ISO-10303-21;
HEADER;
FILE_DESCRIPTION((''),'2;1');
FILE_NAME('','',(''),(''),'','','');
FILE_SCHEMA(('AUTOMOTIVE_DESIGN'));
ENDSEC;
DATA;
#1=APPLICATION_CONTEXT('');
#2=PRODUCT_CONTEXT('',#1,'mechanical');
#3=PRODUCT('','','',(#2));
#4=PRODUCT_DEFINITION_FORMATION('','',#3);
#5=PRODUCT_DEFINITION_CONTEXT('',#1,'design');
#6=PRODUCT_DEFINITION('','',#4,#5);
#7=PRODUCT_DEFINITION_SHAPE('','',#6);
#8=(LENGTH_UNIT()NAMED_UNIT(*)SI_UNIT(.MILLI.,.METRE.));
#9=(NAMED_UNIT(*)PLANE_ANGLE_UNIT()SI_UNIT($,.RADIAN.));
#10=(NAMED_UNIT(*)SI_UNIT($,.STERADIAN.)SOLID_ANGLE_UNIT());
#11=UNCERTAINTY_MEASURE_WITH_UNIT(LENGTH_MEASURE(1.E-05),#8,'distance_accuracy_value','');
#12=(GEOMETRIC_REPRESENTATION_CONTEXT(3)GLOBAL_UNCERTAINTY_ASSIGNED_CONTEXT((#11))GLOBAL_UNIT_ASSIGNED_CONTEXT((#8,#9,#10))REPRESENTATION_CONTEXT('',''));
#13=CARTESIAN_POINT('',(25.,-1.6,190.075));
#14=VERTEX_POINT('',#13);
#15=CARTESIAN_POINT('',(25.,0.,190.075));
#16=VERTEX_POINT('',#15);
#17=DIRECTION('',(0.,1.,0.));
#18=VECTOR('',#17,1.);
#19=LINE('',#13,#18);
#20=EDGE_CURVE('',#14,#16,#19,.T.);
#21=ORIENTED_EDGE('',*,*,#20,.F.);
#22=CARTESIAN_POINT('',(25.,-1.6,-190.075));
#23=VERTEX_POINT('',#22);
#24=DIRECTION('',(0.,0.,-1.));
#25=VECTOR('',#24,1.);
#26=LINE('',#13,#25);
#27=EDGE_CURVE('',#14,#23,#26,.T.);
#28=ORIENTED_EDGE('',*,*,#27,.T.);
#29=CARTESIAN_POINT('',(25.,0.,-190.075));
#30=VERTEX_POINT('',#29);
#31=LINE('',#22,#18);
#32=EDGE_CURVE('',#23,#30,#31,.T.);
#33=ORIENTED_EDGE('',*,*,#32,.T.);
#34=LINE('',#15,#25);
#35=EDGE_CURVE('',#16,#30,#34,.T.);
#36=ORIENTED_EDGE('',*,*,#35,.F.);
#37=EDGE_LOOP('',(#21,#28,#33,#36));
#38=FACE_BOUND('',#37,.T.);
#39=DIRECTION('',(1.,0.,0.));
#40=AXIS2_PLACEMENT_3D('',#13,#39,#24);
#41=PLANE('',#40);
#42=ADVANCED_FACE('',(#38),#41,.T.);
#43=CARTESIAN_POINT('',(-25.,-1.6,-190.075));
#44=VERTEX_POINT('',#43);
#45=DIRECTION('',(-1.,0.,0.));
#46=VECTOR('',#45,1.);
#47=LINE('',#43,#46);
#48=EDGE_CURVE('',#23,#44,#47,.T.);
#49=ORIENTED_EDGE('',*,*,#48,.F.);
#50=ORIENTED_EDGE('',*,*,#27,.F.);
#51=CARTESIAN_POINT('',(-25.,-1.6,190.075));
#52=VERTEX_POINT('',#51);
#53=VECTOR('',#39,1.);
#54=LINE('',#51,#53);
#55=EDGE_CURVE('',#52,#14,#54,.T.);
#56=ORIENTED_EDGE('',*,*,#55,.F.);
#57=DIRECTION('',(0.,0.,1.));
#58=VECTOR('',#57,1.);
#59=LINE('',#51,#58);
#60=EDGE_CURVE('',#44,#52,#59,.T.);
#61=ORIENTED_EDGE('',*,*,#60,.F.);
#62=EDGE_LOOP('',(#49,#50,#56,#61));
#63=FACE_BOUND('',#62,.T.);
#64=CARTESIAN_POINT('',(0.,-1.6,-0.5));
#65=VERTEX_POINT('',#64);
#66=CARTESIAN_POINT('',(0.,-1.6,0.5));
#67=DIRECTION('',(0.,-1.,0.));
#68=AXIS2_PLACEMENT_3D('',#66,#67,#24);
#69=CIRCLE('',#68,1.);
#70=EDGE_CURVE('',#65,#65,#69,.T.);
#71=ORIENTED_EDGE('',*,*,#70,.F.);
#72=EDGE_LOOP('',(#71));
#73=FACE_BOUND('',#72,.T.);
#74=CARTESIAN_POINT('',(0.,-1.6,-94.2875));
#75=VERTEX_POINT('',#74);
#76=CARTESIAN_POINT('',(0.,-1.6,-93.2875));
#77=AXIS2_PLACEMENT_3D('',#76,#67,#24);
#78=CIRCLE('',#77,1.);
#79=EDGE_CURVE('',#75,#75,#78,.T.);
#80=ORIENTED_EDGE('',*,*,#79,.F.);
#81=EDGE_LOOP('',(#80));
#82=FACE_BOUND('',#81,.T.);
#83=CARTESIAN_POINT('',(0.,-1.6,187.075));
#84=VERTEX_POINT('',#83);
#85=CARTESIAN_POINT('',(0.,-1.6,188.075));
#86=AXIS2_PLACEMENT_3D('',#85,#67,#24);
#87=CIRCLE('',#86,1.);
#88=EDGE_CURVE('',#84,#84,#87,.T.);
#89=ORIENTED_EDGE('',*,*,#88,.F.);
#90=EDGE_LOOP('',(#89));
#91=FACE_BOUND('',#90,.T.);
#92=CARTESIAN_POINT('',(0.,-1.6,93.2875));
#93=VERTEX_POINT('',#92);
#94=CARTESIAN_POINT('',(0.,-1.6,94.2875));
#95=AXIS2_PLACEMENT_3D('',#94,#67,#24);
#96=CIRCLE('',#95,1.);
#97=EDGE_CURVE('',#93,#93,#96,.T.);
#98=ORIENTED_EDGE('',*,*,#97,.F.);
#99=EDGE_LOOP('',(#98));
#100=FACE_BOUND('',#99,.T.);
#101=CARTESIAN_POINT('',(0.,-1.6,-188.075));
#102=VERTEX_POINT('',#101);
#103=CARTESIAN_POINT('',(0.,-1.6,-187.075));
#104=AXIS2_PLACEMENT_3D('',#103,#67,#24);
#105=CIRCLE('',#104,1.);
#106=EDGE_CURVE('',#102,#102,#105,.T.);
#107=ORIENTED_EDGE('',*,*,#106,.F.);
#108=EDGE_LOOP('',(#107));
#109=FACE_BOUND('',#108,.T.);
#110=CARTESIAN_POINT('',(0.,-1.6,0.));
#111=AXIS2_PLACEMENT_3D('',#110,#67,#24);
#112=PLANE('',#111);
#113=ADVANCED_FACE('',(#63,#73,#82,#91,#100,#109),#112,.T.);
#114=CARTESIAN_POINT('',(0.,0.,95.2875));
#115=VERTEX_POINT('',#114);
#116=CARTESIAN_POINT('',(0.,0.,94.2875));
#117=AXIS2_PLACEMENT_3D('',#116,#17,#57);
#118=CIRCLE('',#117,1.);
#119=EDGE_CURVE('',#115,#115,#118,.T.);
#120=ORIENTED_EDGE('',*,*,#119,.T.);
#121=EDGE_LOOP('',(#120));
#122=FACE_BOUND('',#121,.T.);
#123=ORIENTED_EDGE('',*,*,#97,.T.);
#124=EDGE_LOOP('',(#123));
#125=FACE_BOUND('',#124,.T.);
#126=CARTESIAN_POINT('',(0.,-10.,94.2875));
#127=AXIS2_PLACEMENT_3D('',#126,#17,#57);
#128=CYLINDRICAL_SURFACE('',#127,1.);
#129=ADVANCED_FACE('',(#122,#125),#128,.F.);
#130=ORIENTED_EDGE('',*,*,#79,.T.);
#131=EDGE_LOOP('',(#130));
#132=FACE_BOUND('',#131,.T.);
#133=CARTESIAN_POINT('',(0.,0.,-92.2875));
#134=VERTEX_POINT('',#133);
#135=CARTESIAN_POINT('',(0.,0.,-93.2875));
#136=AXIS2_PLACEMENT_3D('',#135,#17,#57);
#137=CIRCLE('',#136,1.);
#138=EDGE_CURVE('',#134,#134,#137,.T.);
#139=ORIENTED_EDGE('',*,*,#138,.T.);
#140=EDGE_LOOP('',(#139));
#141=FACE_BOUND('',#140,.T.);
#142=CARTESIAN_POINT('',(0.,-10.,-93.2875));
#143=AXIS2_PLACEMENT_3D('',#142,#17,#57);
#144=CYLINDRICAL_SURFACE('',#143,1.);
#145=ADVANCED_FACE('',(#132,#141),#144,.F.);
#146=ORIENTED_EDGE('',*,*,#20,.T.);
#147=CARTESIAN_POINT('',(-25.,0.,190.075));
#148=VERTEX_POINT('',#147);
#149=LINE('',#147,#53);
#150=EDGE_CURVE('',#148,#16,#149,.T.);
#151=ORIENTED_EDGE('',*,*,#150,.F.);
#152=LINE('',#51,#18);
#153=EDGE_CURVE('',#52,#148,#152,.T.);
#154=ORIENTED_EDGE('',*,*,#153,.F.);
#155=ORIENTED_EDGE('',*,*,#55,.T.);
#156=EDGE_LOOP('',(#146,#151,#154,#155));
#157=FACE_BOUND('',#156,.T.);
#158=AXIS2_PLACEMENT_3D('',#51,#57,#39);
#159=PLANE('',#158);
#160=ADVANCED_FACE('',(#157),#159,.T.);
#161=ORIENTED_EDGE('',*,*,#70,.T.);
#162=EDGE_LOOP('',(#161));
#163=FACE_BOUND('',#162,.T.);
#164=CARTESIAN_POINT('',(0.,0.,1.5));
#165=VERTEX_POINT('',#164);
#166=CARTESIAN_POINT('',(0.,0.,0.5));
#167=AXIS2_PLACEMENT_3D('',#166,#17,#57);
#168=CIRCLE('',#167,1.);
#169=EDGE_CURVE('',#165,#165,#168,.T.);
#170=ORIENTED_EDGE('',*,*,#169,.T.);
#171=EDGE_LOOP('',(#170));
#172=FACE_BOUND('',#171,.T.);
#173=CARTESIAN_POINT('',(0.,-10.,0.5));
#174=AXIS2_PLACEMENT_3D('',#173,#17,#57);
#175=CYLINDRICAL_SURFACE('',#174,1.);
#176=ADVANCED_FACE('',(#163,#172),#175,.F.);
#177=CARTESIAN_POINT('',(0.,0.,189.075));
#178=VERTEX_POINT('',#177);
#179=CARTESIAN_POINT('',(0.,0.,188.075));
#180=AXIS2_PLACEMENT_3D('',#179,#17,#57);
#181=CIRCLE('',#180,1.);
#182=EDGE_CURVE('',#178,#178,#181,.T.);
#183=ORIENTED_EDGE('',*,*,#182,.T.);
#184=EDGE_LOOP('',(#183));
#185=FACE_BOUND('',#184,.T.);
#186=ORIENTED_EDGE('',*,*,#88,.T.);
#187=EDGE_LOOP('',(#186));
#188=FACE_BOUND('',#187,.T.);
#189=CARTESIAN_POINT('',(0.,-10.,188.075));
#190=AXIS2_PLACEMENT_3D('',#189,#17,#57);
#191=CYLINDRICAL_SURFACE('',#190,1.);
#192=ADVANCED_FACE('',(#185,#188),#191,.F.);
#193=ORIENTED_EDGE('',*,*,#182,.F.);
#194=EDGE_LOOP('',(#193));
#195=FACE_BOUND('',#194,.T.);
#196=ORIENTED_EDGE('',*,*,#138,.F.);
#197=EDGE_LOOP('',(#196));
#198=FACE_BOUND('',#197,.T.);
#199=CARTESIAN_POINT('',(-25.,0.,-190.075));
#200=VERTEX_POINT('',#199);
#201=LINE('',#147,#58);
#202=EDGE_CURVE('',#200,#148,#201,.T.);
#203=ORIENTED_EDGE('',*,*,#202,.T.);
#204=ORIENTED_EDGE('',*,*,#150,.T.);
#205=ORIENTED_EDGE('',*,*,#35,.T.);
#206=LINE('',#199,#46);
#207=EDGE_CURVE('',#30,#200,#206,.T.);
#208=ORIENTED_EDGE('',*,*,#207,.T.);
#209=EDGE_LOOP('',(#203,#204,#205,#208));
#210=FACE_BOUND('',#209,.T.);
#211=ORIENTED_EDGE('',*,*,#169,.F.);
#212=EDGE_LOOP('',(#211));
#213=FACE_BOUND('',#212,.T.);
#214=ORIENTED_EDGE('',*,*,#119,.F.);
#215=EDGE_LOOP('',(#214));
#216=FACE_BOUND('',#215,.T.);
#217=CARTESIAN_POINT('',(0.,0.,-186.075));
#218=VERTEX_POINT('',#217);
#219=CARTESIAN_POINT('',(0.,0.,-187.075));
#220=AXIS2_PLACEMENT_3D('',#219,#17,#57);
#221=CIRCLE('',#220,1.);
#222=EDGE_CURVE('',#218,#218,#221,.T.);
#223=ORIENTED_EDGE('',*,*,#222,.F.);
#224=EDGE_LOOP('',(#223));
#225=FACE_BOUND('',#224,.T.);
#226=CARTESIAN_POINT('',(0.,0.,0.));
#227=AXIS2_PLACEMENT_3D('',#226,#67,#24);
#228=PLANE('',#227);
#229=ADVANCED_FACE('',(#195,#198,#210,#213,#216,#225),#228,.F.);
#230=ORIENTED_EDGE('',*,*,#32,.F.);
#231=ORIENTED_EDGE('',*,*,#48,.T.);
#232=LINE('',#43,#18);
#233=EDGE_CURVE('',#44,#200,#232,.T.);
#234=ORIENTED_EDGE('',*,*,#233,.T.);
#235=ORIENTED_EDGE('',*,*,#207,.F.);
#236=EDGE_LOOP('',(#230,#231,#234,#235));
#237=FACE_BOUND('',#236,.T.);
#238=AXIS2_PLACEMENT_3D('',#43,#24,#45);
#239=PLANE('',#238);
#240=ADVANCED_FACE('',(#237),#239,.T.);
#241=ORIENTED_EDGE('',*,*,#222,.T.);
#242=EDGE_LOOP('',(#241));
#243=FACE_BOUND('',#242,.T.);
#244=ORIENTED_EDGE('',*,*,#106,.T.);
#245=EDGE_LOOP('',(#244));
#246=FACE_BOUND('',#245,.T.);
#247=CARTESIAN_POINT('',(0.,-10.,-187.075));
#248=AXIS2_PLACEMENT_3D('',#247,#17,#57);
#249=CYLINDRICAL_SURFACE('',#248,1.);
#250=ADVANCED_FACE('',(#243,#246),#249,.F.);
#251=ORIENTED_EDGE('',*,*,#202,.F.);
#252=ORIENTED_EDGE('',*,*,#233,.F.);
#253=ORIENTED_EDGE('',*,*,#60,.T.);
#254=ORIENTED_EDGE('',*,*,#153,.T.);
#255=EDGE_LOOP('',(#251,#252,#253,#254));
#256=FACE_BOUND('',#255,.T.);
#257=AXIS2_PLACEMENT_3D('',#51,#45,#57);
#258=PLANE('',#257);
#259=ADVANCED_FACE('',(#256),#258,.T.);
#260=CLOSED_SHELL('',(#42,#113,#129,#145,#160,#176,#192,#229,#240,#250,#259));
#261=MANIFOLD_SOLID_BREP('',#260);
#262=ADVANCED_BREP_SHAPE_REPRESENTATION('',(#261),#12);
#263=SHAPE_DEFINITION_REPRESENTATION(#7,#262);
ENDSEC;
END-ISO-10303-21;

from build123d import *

# Parameters (mm, degrees)
SKETCH1_W          = 50
SKETCH1_H          = 380.15
BASE_FLANGE1_DEPTH = 1.6
SKETCH6_R          = 1
CUT_EXTRUDE1_DEPTH = 10
LPATTERN1_COUNT    = 5
LPATTERN1_PITCH    = 93.7875


# Sheet-metal steps are written as plain solids
with BuildPart() as part:
    # Sketch1 → Base-Flange1 (new body)
    with BuildSketch(Plane(origin=(0, 0, 0), x_dir=(1, 0, 0), z_dir=(0, 1, 0))):
        Rectangle(SKETCH1_W, SKETCH1_H)
    extrude(amount=-BASE_FLANGE1_DEPTH)

    # Sketch6 → Cut-Extrude1 (cut)
    with BuildSketch(Plane(origin=(0, 0, 0), x_dir=(1, 0, 0), z_dir=(0, 1, 0))):
        with Locations(Location((0, 187.075, 0), (0, 0, 270))):
            Circle(SKETCH6_R)
    cut_extrude1 = extrude(amount=-CUT_EXTRUDE1_DEPTH, mode=Mode.SUBTRACT)

    # LPattern1: Cut-Extrude1 ×5
    with Locations(*[(0, 0, i * LPATTERN1_PITCH) for i in range(1, LPATTERN1_COUNT)]):
        add(cut_extrude1, mode=Mode.SUBTRACT)


solid = part.part
